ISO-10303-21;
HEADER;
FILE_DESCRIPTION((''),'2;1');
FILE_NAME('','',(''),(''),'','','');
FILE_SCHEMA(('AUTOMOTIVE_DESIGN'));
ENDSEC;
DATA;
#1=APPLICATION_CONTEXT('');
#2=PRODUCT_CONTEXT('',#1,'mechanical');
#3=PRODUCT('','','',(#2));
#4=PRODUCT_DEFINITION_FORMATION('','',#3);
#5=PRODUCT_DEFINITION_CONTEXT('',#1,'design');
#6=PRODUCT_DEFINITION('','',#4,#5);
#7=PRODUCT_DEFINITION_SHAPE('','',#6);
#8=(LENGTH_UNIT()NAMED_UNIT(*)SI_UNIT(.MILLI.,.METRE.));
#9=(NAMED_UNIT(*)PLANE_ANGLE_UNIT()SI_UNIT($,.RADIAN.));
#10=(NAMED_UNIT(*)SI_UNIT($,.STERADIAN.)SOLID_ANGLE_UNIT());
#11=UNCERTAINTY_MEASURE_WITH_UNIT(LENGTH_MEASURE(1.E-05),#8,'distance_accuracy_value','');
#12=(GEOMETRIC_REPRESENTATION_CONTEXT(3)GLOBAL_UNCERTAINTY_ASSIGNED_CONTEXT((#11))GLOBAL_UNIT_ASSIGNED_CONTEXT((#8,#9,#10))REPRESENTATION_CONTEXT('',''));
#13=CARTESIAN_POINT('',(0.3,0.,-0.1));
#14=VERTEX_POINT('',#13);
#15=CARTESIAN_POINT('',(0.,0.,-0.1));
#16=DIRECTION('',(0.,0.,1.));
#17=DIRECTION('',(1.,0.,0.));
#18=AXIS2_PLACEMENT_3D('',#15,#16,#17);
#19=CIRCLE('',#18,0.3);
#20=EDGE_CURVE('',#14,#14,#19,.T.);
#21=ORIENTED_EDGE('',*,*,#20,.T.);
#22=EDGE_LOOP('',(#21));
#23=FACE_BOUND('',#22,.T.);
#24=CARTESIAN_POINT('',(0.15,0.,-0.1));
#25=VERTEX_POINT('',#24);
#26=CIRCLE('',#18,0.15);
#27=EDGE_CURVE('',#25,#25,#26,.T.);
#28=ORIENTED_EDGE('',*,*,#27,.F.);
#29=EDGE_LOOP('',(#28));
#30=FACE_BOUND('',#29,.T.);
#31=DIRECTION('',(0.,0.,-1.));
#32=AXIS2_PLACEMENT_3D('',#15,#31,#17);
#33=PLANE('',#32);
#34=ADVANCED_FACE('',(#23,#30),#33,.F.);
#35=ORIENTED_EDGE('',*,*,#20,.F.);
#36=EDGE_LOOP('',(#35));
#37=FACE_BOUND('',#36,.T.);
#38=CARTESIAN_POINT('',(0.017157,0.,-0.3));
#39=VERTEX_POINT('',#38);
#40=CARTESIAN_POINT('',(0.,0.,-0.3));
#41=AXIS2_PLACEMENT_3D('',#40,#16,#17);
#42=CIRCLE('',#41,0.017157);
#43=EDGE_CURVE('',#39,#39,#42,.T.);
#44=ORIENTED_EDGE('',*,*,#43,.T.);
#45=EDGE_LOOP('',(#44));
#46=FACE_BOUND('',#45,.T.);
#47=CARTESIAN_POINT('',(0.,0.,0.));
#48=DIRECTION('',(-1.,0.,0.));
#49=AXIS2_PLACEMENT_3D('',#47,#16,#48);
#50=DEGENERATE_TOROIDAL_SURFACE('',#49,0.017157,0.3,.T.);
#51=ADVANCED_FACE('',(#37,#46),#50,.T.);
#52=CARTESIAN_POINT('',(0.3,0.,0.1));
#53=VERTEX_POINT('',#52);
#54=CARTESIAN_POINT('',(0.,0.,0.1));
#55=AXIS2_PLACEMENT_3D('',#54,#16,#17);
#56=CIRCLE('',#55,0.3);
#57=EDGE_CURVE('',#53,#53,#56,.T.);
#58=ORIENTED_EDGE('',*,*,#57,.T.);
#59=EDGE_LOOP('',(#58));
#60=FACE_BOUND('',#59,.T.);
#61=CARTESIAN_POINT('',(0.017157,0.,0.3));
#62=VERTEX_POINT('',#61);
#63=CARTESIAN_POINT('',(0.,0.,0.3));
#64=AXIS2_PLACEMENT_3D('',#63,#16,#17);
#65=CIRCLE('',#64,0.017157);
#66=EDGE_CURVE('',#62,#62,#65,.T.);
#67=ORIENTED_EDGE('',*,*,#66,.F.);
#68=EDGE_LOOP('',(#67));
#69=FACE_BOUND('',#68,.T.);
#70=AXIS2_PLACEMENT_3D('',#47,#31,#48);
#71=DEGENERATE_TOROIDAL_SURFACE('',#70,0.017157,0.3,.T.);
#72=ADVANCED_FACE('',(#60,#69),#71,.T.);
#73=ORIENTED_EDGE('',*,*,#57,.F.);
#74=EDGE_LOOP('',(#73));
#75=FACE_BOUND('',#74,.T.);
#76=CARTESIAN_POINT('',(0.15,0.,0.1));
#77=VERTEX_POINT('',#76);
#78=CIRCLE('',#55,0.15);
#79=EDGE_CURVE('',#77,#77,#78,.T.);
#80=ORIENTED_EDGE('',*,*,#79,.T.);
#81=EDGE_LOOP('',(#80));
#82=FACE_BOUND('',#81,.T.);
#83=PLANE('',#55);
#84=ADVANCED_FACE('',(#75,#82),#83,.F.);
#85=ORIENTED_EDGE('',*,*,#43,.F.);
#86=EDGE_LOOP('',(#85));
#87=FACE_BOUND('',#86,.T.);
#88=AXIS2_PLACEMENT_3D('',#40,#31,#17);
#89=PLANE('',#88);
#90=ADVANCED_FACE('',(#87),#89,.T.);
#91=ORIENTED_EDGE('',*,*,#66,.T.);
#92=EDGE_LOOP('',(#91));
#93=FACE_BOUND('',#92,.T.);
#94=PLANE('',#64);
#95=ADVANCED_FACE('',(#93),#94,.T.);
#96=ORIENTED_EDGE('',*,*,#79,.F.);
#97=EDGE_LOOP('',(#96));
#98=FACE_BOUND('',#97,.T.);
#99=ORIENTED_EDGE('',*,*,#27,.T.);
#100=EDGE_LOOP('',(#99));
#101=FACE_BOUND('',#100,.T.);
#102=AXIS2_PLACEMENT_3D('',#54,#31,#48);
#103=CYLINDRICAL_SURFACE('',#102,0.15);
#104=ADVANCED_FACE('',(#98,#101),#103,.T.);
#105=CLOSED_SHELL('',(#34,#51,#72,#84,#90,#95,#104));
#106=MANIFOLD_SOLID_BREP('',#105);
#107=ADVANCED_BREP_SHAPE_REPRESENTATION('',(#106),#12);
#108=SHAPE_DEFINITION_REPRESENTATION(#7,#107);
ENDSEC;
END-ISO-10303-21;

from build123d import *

# Parameters (mm, degrees)
ESBO_O1_R                = 0.15
RESSALTO_EXTRUS_O1_DEPTH = 0.1
ESBO_O2_R                = 0.3
RESSALTO_EXTRUS_O2_DEPTH = 0.2
FILETE1_R                = 0.3


with BuildPart() as part:
    # Esboço1 → Ressalto-extrusão1 (new, symmetric)
    with BuildSketch(Plane.XY):
        Circle(ESBO_O1_R)
    extrude(amount=RESSALTO_EXTRUS_O1_DEPTH, both=True)

    # Esboço2 → Ressalto-extrusão2 (add)
    with BuildSketch(Plane.XY.offset(0.1)):
        Circle(ESBO_O2_R)
    extrude(amount=RESSALTO_EXTRUS_O2_DEPTH)

    # Filete1
    # the kernel refuses this fillet: 0.3 mm, written as the material it takes off along each edge
    with BuildSketch(Plane(origin=(0, 0, 0.3), x_dir=(1, 0, 0), z_dir=(0, -1, 0))) as filete1_piece_1:
        with BuildLine():
            CenterArc((0.017157288, -0.3), FILETE1_R, 19.471220634, 70.528779366)
            Line((0.017157288, 0), (0.017157288, 0.006))
            Line((0.017157288, 0.006), (0.3, 0.006))
            Line((0.3, 0.006), (0.306, 0))
            ThreePointArc((0.306, 0), (0.306, -0.1), (0.305656854, -0.198))
            Line((0.305656854, -0.198), (0.3, -0.2))
        make_face()
    revolve(axis=Axis((0, 0, 0.3), (0, 0, 1)), mode=Mode.SUBTRACT)

    # Espelhar2: part across plane


with BuildPart() as part_1:
    add(part.part)
    add(part.part.mirror(Plane.XY))


solid = part_1.part
